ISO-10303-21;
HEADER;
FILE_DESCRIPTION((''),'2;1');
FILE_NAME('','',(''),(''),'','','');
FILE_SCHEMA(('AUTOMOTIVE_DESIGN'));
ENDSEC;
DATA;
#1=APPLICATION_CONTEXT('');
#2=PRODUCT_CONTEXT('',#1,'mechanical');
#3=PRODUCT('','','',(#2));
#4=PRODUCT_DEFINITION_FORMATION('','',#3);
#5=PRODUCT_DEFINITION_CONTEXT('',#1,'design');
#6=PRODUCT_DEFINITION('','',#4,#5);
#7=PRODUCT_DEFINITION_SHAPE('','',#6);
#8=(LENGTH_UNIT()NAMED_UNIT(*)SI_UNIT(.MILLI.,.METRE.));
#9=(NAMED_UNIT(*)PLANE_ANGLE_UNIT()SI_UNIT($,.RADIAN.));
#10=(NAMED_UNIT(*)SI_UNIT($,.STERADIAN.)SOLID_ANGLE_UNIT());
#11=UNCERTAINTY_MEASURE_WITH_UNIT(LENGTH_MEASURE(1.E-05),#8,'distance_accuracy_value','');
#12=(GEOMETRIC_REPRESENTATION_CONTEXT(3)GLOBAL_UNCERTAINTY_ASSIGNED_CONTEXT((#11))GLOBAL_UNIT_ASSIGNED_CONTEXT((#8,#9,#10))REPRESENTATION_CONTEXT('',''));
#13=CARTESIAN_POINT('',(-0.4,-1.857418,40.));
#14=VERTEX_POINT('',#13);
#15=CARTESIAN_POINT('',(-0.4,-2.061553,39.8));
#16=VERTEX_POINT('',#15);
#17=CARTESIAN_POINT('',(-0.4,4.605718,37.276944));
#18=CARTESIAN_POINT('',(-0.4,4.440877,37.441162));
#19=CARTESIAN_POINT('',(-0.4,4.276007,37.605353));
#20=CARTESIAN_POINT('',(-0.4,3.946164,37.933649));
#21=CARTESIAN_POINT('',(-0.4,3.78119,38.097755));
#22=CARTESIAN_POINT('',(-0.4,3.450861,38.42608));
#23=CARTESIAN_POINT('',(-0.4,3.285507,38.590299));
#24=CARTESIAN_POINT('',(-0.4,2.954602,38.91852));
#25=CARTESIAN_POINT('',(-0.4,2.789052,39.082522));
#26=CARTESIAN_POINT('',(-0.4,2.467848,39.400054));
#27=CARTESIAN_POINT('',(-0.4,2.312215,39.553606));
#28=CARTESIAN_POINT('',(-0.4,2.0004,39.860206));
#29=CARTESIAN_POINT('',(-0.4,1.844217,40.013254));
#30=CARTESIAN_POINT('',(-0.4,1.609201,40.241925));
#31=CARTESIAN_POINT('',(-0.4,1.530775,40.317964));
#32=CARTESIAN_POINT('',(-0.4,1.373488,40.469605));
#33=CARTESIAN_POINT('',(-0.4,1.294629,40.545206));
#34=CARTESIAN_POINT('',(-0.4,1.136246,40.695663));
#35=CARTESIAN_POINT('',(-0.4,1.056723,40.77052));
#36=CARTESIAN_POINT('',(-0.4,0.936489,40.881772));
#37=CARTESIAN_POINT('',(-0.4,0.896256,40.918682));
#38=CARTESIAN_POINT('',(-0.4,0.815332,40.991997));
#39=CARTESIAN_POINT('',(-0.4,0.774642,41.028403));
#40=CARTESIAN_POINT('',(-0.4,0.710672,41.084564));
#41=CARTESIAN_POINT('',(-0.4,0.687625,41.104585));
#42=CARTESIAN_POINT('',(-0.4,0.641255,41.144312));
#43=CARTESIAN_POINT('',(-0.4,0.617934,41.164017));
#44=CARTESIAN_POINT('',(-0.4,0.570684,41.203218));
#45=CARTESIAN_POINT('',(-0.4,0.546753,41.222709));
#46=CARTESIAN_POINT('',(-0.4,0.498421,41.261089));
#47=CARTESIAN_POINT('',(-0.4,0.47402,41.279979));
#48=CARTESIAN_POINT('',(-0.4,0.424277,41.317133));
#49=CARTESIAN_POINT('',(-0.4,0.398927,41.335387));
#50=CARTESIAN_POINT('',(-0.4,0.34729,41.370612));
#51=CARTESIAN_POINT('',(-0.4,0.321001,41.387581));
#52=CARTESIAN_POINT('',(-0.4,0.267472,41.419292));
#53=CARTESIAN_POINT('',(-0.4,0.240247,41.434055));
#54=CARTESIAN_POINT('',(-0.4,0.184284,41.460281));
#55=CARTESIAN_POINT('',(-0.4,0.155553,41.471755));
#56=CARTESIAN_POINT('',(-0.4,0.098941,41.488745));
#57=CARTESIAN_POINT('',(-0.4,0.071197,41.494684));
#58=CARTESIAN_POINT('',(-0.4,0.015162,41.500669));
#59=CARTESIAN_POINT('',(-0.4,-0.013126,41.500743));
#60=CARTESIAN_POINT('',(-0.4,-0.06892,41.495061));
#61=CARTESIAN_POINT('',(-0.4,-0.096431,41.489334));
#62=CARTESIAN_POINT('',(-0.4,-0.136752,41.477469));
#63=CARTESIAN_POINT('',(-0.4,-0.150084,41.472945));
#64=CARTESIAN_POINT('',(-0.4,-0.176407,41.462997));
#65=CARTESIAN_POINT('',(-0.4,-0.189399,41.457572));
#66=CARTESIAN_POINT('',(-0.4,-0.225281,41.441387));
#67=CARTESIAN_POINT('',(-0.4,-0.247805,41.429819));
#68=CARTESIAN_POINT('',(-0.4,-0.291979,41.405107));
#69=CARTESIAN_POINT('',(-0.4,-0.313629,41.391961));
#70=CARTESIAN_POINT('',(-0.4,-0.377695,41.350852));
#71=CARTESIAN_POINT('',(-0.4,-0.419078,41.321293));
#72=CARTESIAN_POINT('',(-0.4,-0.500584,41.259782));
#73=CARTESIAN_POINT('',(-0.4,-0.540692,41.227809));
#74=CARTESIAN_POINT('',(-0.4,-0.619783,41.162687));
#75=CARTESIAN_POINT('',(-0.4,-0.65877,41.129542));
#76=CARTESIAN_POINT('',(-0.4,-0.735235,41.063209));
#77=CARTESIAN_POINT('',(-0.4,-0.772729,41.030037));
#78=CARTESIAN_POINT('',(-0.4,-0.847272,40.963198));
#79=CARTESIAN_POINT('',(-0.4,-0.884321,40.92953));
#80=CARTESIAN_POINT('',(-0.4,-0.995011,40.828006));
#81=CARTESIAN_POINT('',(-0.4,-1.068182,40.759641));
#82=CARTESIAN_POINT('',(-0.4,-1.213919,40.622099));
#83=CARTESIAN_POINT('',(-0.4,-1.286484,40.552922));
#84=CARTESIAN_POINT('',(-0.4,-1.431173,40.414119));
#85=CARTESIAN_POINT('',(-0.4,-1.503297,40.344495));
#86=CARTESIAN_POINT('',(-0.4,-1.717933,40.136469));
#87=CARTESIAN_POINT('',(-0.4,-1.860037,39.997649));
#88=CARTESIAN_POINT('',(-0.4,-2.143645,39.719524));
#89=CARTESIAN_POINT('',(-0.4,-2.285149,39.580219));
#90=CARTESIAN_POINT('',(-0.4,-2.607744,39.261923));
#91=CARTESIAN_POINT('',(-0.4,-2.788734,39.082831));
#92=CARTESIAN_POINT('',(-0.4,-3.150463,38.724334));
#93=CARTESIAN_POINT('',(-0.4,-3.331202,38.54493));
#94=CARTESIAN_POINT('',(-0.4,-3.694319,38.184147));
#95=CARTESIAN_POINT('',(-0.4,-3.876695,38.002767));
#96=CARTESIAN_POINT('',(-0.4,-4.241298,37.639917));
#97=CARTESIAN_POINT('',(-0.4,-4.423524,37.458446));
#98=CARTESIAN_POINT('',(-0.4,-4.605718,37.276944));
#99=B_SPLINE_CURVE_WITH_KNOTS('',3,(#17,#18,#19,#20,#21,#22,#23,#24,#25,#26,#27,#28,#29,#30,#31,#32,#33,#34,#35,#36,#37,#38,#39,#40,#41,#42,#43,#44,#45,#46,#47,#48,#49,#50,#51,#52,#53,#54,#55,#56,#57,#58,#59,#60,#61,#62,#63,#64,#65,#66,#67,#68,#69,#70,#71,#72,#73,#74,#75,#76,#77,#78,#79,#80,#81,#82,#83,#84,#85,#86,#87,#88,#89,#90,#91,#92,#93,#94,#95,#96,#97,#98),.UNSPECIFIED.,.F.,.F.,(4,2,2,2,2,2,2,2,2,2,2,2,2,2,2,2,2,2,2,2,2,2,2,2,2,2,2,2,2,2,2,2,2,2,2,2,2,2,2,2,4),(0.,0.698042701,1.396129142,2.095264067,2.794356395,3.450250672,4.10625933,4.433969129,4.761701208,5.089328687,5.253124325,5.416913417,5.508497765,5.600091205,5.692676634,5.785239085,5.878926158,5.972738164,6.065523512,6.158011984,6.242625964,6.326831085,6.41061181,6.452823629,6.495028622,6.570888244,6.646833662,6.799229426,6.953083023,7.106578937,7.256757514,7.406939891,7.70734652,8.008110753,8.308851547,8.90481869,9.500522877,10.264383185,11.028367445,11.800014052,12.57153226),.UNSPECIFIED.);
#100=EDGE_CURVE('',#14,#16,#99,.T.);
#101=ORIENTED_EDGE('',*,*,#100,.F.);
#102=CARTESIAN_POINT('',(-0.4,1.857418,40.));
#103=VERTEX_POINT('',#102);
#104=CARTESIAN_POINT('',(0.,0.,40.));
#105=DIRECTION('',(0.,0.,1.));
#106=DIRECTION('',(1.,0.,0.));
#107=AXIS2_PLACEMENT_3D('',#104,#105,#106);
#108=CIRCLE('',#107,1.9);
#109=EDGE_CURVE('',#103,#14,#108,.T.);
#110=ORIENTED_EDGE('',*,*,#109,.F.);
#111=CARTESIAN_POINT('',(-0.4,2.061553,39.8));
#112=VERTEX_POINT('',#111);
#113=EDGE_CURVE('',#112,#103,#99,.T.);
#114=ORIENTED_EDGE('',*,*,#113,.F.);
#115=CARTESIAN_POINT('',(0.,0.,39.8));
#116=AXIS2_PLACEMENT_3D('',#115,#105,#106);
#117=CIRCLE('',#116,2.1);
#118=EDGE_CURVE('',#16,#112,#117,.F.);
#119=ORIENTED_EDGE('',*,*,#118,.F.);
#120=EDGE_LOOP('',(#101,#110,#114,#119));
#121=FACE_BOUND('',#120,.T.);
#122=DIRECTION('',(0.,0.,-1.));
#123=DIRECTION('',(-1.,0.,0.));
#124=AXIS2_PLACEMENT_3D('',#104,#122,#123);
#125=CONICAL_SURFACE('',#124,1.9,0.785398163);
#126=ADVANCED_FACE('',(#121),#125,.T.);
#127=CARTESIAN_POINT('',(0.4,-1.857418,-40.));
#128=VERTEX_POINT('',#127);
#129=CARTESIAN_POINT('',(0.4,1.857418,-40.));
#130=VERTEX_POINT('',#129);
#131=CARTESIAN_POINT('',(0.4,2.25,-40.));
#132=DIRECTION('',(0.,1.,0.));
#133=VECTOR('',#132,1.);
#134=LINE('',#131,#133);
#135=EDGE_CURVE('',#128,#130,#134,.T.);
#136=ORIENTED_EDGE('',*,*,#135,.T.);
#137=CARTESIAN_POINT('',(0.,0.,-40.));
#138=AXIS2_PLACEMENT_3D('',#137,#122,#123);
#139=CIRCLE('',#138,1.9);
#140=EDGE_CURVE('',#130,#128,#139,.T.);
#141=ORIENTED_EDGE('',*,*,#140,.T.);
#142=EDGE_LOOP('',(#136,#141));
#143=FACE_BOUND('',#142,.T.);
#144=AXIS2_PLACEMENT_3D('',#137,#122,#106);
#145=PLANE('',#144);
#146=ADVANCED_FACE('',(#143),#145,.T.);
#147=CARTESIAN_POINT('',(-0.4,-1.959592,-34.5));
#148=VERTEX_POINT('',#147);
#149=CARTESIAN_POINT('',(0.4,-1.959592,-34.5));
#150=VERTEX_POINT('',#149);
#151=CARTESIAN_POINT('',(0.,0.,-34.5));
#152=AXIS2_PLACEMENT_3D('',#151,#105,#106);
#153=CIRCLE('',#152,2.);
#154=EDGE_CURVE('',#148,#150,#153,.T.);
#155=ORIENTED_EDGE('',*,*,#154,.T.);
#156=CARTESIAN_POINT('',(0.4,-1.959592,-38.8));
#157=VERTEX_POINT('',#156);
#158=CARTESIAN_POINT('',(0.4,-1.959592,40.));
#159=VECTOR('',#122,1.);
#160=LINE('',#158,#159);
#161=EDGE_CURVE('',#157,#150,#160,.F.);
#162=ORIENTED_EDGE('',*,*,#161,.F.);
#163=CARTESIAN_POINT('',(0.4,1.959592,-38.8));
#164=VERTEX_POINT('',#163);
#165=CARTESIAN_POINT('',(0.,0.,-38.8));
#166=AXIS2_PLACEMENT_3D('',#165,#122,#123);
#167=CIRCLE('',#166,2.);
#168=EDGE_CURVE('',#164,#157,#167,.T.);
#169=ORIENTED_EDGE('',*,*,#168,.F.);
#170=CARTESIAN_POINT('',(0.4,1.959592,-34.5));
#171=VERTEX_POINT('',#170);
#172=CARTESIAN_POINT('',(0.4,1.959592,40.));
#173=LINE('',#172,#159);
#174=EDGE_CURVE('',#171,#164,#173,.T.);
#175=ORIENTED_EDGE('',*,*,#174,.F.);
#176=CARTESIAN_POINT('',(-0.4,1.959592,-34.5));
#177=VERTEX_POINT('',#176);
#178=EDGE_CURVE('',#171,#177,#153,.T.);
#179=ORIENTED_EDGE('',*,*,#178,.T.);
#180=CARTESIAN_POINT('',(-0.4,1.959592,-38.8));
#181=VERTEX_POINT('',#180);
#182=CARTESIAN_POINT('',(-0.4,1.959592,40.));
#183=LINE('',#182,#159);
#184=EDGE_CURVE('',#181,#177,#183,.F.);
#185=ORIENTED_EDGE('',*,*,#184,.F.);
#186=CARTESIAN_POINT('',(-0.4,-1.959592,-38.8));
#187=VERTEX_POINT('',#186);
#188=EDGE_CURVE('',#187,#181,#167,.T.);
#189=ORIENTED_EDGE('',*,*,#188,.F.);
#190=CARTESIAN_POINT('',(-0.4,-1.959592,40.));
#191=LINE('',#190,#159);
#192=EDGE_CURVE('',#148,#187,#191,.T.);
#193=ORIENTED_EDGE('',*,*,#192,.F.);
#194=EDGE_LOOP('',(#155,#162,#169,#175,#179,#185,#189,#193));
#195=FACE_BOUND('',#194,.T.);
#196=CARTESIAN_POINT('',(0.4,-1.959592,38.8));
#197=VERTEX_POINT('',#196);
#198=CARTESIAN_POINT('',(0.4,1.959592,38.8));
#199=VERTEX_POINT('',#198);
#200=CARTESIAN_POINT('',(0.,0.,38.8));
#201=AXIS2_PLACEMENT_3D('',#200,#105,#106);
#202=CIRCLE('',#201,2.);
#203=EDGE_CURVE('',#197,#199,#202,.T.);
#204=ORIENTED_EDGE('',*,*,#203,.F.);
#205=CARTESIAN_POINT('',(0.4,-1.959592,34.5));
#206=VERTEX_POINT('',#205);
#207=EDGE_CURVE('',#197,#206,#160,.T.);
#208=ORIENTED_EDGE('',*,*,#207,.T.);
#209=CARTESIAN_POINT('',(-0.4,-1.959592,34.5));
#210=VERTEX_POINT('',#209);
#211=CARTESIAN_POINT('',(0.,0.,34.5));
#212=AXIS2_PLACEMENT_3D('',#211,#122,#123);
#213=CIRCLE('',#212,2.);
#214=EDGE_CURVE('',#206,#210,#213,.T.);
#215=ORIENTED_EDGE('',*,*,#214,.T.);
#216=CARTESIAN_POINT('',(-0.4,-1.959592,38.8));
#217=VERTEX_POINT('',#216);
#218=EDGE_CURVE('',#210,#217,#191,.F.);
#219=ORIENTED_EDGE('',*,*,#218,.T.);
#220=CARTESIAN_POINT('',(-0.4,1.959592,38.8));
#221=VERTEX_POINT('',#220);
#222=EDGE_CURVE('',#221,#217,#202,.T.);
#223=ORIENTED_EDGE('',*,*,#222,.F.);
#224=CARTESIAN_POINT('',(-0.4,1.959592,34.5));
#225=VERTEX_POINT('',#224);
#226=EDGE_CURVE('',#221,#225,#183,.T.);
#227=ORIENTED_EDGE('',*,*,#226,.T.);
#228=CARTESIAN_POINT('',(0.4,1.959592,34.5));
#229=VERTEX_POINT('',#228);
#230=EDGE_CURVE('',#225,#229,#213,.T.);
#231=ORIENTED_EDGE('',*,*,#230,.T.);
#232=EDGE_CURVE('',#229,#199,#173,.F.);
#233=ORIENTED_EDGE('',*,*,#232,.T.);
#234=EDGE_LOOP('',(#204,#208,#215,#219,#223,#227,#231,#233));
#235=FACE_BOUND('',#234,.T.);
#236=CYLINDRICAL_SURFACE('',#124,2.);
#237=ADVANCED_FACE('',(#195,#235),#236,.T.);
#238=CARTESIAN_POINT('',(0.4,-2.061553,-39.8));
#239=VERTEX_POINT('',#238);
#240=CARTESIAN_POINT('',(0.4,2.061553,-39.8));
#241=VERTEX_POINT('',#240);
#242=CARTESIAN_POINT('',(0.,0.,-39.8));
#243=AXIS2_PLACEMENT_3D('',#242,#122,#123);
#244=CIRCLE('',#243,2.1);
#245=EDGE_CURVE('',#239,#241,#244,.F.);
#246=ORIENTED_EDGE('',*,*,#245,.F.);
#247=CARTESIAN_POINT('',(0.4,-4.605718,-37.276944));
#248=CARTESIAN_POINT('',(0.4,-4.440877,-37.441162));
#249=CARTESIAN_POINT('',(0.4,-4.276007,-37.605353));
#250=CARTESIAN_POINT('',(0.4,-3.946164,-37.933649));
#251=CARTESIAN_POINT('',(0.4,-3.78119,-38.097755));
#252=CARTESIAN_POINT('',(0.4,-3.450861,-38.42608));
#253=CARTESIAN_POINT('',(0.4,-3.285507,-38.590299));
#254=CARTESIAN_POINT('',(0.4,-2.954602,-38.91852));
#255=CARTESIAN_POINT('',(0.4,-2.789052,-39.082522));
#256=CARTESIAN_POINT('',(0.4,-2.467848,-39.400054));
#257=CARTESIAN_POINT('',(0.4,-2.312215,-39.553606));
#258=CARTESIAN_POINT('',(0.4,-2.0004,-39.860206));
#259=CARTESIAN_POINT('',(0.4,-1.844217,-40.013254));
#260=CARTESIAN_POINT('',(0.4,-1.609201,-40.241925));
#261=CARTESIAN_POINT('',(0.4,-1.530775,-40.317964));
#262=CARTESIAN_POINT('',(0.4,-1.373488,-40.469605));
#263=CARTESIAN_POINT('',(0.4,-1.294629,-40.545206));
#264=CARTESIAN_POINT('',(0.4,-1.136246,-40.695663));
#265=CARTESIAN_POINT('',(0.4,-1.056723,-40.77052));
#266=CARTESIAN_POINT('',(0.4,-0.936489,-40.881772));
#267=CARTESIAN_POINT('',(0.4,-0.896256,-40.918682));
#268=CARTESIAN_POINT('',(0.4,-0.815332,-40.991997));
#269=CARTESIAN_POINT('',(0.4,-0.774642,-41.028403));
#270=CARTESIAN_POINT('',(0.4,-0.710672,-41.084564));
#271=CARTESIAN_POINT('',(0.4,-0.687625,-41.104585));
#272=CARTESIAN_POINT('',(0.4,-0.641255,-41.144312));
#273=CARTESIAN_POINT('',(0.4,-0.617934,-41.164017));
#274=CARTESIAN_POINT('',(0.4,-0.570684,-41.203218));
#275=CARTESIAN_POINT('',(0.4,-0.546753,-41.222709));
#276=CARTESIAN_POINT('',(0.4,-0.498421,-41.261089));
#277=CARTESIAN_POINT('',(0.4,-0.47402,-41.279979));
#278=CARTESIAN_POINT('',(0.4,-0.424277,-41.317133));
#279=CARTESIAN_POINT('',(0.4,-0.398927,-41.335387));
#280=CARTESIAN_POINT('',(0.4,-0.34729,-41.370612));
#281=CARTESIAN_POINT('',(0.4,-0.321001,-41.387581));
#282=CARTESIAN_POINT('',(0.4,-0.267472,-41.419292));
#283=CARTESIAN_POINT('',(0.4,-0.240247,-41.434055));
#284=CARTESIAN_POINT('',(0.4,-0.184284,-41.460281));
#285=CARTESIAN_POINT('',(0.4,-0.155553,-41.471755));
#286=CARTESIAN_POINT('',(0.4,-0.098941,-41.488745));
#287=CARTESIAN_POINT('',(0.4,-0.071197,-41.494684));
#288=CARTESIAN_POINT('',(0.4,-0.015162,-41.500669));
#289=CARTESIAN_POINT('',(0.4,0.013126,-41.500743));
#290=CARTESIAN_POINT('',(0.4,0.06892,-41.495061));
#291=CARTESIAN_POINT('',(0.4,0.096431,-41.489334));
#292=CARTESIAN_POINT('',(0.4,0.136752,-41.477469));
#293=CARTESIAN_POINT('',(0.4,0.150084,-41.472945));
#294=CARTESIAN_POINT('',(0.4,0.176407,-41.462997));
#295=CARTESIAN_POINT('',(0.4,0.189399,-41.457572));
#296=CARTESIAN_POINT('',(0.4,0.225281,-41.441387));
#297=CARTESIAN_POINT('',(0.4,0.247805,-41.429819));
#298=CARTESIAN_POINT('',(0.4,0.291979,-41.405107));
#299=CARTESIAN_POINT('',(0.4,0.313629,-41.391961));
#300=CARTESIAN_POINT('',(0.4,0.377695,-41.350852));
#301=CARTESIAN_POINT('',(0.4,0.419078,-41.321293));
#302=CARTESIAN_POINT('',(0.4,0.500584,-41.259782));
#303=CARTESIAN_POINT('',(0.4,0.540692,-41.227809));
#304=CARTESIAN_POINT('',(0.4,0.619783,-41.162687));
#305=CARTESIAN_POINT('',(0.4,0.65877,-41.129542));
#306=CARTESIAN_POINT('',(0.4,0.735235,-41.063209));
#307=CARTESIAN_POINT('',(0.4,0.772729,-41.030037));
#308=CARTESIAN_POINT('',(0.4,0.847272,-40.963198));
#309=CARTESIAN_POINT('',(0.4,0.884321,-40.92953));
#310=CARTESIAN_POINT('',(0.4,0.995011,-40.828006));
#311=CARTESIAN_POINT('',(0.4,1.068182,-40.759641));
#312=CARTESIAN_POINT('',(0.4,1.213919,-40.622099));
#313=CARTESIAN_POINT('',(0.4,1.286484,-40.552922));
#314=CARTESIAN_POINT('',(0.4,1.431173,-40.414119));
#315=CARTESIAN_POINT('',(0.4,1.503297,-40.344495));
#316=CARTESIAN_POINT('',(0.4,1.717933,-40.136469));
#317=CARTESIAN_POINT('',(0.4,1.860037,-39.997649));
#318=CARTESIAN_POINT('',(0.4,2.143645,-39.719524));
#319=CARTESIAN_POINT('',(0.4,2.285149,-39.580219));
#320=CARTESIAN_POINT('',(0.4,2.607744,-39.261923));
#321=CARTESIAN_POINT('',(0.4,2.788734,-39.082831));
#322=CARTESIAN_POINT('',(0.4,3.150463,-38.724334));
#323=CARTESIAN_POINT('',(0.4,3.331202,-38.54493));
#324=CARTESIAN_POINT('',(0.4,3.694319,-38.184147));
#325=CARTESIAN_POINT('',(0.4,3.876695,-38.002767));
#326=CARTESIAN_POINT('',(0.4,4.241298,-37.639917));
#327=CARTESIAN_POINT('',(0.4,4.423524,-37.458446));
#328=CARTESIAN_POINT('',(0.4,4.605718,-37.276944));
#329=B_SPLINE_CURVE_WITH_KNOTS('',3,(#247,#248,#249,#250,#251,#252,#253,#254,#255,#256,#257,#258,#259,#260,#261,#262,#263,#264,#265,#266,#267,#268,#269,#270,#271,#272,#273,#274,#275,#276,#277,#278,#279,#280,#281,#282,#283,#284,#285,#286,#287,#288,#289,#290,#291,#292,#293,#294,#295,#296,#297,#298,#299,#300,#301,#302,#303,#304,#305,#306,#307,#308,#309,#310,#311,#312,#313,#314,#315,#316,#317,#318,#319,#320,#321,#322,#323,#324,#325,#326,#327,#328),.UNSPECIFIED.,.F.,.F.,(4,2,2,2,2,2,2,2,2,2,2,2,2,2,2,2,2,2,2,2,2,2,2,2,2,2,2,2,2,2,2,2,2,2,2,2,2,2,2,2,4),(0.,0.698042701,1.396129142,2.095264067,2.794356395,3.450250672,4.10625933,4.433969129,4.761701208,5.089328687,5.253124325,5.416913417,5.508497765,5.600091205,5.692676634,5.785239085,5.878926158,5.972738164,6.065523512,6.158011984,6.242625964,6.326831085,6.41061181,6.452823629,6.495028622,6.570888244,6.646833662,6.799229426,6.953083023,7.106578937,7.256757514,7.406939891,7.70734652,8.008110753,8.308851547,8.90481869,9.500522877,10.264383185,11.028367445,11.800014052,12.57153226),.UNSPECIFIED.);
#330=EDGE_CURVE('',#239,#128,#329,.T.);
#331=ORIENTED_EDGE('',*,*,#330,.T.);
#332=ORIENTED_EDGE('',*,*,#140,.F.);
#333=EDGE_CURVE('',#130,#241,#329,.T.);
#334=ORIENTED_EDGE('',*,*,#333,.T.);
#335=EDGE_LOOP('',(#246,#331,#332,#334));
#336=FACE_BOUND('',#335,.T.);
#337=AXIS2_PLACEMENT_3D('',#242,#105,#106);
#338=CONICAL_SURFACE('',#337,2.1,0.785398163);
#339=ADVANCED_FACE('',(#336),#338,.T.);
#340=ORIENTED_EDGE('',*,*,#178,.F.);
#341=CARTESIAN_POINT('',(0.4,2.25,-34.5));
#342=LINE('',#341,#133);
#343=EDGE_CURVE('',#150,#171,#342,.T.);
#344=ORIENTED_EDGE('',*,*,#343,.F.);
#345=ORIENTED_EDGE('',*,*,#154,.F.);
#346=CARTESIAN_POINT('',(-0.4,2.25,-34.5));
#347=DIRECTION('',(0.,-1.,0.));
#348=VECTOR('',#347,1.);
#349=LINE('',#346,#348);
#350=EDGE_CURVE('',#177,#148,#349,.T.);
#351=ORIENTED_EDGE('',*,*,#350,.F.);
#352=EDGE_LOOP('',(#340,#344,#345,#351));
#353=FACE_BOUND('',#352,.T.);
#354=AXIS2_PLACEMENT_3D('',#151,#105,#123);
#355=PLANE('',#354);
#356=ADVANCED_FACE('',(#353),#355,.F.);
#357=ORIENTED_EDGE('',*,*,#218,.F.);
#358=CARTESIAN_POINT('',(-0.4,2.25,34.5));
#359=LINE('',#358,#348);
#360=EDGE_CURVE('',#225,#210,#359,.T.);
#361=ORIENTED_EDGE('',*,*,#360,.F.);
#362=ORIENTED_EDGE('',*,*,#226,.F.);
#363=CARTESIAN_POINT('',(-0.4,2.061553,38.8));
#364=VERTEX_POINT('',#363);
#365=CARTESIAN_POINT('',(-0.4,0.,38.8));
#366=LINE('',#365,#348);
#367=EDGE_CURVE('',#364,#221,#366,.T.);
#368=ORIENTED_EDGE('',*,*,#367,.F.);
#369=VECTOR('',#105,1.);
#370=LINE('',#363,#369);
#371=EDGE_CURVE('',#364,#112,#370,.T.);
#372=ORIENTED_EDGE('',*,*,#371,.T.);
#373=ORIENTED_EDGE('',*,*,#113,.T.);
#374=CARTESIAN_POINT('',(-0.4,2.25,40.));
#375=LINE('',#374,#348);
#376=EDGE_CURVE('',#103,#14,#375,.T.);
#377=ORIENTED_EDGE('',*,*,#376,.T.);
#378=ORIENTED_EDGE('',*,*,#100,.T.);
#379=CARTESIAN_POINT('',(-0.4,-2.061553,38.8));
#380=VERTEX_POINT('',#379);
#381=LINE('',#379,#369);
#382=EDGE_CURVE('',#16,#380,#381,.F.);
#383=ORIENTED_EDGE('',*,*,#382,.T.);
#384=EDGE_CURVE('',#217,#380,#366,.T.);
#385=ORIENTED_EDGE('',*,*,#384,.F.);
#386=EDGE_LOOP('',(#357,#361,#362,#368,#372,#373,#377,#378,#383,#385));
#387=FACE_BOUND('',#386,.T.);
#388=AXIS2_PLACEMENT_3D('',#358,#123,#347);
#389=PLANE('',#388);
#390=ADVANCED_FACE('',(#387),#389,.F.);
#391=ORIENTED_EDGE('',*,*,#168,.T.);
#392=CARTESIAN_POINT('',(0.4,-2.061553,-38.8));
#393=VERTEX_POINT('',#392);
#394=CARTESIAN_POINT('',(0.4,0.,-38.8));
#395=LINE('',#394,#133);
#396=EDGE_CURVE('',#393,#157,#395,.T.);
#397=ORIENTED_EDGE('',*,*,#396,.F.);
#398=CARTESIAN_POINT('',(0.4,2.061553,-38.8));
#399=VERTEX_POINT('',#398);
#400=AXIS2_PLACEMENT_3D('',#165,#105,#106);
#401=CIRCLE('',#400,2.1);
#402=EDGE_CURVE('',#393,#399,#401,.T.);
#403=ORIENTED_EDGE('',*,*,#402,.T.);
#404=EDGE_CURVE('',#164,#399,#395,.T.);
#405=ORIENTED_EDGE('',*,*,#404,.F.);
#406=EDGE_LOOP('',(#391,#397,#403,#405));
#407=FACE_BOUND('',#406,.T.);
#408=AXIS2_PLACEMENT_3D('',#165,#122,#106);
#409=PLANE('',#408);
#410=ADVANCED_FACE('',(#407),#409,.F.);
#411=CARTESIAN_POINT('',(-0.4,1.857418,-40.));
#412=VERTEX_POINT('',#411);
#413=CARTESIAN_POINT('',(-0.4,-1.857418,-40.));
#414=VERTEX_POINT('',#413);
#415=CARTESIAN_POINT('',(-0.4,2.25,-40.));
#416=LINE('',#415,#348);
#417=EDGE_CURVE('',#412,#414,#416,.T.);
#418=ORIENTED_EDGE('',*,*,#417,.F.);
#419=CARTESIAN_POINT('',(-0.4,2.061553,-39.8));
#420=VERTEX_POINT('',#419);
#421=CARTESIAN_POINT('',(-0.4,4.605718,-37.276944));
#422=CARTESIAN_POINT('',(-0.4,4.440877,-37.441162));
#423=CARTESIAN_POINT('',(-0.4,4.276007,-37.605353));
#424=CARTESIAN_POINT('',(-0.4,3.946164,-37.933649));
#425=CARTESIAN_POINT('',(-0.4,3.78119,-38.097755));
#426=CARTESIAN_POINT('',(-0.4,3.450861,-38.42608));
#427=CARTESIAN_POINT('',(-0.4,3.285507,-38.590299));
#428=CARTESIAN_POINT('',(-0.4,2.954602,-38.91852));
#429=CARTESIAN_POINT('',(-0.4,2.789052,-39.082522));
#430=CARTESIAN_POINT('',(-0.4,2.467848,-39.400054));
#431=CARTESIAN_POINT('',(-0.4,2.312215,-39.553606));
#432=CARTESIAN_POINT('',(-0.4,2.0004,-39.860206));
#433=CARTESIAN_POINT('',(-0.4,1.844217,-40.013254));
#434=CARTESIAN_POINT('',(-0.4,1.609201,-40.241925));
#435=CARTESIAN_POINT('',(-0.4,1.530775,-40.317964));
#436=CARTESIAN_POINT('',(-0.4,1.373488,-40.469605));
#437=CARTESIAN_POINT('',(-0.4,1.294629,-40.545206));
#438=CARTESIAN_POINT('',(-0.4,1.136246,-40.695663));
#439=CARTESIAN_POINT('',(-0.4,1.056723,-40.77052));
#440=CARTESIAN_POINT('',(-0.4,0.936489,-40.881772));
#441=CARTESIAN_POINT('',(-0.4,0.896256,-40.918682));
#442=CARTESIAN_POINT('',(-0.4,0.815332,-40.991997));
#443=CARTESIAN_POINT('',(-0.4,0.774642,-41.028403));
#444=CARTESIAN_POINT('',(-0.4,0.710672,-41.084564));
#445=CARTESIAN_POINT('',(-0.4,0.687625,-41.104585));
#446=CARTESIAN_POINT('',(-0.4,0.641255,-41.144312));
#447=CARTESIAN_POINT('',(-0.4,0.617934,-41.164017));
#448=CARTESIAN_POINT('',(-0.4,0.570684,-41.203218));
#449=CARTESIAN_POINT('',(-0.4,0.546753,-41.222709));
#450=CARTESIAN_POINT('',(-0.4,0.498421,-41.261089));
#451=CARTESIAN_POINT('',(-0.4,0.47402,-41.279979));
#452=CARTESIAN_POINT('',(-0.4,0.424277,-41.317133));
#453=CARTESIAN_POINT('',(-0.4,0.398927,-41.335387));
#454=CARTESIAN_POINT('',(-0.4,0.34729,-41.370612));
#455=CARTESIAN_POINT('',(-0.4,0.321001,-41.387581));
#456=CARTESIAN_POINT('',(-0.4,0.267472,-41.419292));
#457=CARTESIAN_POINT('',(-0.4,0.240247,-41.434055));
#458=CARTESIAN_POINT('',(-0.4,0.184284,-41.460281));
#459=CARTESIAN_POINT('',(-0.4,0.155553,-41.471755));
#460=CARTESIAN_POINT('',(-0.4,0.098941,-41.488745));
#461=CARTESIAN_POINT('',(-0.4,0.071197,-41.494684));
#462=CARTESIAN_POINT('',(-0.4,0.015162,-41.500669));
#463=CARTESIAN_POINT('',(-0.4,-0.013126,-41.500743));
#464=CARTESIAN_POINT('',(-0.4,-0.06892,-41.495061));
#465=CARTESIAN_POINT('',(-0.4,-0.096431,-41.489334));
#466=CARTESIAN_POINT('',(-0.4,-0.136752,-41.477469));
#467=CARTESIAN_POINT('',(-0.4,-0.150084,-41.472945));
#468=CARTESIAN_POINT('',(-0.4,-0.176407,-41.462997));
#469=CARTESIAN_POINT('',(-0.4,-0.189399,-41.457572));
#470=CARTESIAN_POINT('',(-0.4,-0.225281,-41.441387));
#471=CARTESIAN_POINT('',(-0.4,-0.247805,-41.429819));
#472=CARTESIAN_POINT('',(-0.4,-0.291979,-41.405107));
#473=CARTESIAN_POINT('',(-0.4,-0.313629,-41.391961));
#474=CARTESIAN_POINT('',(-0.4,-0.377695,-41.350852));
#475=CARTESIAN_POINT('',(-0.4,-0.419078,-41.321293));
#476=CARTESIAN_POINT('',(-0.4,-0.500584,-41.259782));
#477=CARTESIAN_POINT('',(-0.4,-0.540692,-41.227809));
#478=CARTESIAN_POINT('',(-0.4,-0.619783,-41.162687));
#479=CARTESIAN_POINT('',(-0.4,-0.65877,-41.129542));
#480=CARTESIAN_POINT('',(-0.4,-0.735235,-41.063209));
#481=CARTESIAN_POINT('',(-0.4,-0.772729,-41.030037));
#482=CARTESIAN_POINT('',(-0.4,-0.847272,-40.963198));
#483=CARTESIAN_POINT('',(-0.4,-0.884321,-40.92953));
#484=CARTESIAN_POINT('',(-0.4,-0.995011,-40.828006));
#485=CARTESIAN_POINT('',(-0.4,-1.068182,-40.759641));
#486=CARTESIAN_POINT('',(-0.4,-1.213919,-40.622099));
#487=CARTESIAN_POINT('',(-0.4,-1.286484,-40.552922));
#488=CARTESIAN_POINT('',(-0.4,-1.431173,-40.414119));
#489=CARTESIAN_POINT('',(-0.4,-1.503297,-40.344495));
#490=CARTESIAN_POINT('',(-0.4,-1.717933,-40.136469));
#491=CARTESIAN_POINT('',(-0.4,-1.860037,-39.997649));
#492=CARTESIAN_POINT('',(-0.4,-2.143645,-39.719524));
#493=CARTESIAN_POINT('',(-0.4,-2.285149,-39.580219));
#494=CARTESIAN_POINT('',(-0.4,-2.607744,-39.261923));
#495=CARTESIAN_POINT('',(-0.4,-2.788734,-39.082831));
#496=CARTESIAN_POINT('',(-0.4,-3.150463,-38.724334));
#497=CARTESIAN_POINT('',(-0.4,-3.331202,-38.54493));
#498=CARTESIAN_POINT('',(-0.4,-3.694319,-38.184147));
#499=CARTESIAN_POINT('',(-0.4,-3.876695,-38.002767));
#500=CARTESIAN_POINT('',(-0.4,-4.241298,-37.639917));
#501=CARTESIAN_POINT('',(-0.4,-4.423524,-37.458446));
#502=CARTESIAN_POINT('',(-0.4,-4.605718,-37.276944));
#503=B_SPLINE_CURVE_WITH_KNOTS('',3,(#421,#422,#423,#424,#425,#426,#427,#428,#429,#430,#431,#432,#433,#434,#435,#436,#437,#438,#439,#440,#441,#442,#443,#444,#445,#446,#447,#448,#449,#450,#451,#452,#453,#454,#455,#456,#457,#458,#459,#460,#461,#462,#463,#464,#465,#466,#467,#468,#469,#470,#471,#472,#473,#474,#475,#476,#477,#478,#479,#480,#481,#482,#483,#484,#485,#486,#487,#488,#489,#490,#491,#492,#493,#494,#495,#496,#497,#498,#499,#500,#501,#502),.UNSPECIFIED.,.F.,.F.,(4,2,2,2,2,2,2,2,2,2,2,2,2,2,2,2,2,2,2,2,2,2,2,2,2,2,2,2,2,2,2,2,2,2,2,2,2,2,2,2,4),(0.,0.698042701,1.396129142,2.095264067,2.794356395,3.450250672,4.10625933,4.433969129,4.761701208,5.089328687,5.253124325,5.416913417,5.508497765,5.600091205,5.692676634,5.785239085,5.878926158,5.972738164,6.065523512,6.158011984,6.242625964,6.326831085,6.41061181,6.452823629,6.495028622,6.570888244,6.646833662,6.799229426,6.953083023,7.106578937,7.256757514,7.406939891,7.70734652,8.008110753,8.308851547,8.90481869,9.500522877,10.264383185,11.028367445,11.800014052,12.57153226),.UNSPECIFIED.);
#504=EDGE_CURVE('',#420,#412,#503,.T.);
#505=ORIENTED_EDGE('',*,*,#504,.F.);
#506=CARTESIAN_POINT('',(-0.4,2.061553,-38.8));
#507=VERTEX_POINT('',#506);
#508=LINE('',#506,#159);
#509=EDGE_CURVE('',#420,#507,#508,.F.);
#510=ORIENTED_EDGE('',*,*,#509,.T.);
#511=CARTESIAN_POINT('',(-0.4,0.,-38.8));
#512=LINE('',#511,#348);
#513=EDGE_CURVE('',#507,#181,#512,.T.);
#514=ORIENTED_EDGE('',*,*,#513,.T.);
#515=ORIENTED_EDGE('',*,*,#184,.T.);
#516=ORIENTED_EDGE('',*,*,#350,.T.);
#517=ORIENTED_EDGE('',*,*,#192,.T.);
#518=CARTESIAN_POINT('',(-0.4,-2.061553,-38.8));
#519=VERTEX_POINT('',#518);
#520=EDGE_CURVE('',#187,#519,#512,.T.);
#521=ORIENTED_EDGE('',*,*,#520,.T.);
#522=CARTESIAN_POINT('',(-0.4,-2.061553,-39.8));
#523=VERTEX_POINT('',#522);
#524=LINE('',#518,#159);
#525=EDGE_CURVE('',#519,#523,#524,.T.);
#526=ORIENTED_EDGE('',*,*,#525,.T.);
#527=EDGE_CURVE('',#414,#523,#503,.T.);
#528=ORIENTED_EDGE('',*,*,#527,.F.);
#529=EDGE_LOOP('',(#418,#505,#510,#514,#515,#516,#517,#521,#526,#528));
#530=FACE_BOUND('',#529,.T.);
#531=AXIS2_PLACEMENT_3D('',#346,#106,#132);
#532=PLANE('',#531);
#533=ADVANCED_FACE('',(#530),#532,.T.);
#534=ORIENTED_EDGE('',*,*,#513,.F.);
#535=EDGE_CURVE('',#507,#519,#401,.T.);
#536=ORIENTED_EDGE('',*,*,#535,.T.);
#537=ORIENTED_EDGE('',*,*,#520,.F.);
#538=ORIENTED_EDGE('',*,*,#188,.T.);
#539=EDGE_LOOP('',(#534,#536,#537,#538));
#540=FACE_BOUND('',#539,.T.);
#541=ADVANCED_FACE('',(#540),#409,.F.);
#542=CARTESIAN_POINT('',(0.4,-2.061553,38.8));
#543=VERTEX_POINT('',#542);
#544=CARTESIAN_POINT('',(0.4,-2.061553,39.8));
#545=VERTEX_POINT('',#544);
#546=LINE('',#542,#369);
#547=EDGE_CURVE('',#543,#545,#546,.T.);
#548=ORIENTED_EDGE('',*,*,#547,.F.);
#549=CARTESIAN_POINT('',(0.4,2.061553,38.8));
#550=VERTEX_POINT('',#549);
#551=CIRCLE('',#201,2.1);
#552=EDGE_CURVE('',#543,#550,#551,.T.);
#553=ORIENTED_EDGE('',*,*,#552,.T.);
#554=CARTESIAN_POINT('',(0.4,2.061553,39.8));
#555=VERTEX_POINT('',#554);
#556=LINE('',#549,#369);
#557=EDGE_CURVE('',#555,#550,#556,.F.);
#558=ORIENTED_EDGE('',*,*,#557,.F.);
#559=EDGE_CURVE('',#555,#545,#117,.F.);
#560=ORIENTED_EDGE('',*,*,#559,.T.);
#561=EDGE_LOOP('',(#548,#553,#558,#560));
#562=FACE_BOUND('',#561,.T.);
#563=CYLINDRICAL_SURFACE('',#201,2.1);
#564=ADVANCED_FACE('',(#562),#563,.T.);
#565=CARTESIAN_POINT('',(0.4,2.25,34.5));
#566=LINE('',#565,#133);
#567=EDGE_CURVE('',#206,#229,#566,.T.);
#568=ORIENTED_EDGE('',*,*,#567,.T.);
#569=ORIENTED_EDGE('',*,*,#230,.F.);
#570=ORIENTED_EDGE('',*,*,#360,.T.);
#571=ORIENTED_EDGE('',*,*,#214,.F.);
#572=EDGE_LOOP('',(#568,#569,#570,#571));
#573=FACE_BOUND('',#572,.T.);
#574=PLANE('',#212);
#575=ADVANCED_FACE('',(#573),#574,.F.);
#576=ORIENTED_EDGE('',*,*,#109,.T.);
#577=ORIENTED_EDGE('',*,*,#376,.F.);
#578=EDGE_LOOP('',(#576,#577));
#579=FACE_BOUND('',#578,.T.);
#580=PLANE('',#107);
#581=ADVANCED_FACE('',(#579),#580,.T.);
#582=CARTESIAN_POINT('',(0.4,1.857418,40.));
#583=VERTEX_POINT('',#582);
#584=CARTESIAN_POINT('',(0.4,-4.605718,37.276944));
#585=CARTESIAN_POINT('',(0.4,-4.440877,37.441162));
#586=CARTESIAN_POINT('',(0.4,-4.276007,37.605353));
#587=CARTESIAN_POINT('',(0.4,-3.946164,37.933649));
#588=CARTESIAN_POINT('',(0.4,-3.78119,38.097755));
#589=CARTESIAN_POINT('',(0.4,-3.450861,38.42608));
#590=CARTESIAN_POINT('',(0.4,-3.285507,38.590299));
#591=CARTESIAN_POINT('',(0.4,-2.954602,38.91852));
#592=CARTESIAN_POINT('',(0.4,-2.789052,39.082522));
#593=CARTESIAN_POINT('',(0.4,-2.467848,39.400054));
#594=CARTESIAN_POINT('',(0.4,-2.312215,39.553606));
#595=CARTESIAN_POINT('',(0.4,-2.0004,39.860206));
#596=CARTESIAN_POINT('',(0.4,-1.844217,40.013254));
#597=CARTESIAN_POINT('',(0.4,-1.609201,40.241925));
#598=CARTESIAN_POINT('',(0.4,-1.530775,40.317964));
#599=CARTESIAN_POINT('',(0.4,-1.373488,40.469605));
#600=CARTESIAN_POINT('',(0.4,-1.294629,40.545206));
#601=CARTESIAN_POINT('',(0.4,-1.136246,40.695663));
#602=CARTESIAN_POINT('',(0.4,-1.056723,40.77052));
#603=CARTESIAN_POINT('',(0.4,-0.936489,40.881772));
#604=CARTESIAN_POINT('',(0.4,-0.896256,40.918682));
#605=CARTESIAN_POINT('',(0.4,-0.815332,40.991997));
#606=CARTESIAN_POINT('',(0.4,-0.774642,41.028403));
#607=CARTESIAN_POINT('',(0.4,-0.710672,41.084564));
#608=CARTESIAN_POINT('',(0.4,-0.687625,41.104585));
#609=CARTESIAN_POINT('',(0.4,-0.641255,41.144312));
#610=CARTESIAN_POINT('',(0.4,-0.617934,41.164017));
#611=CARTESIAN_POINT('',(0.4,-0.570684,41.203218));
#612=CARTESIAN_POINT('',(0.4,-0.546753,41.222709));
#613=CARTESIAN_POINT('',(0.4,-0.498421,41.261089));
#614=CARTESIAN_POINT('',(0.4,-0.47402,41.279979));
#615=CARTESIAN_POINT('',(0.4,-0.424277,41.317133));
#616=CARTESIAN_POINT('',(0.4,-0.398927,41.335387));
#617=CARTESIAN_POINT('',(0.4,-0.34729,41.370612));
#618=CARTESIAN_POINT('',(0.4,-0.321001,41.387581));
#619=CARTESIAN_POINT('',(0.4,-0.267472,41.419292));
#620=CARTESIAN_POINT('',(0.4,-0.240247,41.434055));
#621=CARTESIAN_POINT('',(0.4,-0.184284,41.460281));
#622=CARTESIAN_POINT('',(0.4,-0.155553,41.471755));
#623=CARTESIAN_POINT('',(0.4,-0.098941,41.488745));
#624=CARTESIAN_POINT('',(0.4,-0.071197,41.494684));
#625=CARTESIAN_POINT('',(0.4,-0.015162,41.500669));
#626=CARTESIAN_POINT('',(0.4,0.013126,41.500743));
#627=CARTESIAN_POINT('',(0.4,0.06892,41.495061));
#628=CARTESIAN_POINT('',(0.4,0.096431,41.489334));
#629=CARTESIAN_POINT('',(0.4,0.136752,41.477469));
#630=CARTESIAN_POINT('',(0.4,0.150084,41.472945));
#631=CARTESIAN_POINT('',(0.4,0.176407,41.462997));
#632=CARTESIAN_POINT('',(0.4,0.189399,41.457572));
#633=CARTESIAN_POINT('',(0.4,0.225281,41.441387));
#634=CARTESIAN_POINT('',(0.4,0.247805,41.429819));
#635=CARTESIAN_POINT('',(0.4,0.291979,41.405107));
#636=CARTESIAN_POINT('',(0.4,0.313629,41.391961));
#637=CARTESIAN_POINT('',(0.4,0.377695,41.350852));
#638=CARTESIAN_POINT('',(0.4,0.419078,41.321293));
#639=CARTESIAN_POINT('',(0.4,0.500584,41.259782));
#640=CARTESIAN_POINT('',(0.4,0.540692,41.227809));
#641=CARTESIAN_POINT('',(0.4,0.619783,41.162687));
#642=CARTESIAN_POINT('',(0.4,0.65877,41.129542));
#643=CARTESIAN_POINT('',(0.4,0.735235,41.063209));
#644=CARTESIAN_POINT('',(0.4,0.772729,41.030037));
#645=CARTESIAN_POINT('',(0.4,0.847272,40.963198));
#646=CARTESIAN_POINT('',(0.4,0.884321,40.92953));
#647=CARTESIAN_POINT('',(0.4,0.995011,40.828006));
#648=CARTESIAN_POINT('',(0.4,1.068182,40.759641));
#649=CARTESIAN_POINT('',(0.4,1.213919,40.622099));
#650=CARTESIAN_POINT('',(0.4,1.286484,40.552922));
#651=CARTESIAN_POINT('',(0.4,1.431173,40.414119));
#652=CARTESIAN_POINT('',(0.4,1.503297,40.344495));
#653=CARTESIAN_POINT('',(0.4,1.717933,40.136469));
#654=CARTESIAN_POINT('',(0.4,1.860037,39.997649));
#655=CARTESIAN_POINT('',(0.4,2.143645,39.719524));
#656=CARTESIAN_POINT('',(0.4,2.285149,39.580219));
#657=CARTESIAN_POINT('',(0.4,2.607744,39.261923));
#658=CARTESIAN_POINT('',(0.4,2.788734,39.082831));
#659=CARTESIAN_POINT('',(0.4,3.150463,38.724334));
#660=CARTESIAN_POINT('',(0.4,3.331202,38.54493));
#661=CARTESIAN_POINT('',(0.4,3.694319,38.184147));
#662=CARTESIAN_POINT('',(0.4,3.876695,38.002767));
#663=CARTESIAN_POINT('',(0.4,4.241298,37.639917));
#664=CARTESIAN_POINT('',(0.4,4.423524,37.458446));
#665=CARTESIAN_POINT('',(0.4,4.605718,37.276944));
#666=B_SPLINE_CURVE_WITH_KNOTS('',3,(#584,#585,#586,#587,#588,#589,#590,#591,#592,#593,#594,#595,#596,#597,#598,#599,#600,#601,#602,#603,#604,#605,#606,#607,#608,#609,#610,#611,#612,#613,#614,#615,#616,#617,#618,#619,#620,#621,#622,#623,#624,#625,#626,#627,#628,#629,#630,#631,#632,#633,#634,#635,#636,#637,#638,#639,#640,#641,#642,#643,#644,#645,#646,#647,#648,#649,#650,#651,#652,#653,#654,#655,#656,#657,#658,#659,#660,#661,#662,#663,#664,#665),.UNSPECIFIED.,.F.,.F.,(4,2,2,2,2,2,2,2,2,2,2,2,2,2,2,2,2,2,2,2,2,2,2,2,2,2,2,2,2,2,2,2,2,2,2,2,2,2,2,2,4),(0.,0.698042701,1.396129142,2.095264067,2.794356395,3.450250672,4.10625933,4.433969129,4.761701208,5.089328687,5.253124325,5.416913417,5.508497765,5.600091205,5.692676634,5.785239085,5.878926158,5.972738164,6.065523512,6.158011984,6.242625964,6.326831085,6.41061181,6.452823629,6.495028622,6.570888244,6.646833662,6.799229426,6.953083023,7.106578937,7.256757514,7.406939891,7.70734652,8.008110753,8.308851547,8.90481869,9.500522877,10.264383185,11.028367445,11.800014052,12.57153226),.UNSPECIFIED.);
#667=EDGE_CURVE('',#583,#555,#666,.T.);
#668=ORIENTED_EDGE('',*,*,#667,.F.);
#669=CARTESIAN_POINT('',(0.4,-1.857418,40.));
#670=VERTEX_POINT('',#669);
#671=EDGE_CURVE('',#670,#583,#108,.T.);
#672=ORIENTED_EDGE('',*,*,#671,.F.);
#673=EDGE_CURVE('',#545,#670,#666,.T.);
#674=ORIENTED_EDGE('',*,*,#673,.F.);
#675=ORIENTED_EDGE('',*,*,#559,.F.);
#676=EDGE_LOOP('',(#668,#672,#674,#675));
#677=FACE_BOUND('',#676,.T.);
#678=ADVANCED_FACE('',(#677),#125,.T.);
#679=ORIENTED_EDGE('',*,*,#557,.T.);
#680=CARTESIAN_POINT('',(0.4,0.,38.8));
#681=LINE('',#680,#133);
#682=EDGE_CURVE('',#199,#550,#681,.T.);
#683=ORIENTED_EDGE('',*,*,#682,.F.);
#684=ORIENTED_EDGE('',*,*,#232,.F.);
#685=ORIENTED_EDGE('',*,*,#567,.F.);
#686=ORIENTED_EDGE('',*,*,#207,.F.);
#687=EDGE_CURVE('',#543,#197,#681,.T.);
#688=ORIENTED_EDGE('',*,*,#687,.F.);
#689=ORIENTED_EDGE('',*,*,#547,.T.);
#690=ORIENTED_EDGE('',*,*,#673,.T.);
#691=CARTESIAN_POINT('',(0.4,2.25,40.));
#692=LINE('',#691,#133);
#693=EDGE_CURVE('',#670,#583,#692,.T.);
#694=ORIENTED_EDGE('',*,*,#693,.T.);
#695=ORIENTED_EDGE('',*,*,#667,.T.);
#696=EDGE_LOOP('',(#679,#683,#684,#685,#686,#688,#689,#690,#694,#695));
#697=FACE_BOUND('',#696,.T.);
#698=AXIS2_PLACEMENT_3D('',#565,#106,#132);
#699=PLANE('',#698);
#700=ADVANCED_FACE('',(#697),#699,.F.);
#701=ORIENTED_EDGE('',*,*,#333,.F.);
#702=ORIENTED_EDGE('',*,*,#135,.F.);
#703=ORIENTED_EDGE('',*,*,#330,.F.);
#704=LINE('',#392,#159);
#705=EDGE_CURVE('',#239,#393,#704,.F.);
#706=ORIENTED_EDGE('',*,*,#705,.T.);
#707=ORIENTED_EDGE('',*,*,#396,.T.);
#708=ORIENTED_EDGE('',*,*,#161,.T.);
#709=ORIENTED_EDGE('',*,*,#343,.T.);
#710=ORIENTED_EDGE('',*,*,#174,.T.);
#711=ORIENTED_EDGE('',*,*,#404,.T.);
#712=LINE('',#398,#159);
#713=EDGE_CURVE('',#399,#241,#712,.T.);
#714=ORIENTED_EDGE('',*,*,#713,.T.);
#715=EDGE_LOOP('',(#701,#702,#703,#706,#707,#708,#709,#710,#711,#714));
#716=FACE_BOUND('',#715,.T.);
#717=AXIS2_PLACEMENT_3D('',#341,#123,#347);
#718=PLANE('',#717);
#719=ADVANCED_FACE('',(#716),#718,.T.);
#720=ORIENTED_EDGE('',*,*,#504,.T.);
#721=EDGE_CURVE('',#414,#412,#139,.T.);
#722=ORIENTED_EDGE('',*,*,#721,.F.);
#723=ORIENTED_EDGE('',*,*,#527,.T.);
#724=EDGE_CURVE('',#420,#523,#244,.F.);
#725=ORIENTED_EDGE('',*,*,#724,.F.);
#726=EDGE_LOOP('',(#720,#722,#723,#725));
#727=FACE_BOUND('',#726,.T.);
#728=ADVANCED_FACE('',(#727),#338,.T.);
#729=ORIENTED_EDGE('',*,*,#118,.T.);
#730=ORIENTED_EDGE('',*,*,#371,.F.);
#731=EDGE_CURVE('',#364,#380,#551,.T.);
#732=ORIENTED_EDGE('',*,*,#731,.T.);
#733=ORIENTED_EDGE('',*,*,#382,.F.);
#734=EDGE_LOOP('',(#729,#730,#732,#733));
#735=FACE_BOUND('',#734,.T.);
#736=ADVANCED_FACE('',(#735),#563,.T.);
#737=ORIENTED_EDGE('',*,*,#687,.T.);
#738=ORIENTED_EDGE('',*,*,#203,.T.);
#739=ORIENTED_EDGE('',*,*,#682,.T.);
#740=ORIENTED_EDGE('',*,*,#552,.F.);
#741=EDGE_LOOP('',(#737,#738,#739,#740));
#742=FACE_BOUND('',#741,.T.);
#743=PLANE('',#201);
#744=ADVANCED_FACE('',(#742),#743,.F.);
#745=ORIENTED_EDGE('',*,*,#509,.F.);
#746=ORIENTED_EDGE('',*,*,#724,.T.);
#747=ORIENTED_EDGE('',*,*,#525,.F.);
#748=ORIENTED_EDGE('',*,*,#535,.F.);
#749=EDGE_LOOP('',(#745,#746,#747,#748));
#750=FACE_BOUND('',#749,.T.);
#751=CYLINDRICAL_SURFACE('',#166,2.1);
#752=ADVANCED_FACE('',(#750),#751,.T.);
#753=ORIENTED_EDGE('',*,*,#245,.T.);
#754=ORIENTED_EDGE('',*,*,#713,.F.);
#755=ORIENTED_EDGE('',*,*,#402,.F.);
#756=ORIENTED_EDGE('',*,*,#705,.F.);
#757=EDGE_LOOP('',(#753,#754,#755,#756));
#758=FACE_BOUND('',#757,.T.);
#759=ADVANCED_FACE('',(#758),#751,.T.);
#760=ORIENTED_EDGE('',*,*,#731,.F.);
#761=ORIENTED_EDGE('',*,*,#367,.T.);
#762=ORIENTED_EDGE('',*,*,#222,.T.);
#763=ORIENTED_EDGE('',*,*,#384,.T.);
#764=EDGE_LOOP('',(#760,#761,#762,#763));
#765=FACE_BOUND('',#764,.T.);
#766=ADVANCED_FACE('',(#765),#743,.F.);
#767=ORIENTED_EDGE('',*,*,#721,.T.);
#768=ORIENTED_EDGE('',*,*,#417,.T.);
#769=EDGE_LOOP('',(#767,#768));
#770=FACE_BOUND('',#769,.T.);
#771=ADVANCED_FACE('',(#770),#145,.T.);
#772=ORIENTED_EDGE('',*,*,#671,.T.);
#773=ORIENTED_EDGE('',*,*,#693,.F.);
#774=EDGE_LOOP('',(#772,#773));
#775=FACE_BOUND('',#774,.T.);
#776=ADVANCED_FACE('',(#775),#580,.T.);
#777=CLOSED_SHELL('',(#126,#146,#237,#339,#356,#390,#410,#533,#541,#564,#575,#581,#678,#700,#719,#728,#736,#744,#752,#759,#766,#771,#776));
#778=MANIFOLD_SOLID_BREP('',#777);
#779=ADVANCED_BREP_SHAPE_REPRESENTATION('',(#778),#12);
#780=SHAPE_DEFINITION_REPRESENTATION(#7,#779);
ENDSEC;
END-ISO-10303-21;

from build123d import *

# Parameters (mm, degrees)
SKETCH_1_R          = 2
EXTRUDE_1_DEPTH     = 40
SKETCH_2_R          = 2.1
EXTRUDE_2_DEPTH     = 1.2
CHAMFER_1_SIZE      = 0.2
SKETCH_3_W          = 0.8
SKETCH_3_H          = 4.5
CUT_EXTRUDE_1_DEPTH = 5.5


# Read off the part's stored shape, not the designer's step: 镜向1
with BuildPart() as part:
    # 草图1 → 凸台-拉伸1 (new body)
    with BuildSketch(Plane.XY):
        Circle(SKETCH_1_R)
    extrude(amount=EXTRUDE_1_DEPTH)

    # 草图2 → 凸台-拉伸2 (add)
    with BuildSketch(Plane.XY.offset(40)):
        Circle(SKETCH_2_R)
    extrude(amount=-EXTRUDE_2_DEPTH)

    # 倒角1
    chamfer_1_edges = [part.edges().sort_by_distance(p)[0] for p in [
        (-2.1, 0, 40),
    ]]
    chamfer(chamfer_1_edges, length=CHAMFER_1_SIZE)

    # 草图3 → 切除-拉伸1 (cut)
    with BuildSketch(Plane.XY.offset(40)):
        Rectangle(SKETCH_3_W, SKETCH_3_H)
    extrude(amount=-CUT_EXTRUDE_1_DEPTH, mode=Mode.SUBTRACT)

    # 镜向1: part across plane


with BuildPart() as part_1:
    add(part.part)
    add(part.part.mirror(Plane.XY))


solid = part_1.part
